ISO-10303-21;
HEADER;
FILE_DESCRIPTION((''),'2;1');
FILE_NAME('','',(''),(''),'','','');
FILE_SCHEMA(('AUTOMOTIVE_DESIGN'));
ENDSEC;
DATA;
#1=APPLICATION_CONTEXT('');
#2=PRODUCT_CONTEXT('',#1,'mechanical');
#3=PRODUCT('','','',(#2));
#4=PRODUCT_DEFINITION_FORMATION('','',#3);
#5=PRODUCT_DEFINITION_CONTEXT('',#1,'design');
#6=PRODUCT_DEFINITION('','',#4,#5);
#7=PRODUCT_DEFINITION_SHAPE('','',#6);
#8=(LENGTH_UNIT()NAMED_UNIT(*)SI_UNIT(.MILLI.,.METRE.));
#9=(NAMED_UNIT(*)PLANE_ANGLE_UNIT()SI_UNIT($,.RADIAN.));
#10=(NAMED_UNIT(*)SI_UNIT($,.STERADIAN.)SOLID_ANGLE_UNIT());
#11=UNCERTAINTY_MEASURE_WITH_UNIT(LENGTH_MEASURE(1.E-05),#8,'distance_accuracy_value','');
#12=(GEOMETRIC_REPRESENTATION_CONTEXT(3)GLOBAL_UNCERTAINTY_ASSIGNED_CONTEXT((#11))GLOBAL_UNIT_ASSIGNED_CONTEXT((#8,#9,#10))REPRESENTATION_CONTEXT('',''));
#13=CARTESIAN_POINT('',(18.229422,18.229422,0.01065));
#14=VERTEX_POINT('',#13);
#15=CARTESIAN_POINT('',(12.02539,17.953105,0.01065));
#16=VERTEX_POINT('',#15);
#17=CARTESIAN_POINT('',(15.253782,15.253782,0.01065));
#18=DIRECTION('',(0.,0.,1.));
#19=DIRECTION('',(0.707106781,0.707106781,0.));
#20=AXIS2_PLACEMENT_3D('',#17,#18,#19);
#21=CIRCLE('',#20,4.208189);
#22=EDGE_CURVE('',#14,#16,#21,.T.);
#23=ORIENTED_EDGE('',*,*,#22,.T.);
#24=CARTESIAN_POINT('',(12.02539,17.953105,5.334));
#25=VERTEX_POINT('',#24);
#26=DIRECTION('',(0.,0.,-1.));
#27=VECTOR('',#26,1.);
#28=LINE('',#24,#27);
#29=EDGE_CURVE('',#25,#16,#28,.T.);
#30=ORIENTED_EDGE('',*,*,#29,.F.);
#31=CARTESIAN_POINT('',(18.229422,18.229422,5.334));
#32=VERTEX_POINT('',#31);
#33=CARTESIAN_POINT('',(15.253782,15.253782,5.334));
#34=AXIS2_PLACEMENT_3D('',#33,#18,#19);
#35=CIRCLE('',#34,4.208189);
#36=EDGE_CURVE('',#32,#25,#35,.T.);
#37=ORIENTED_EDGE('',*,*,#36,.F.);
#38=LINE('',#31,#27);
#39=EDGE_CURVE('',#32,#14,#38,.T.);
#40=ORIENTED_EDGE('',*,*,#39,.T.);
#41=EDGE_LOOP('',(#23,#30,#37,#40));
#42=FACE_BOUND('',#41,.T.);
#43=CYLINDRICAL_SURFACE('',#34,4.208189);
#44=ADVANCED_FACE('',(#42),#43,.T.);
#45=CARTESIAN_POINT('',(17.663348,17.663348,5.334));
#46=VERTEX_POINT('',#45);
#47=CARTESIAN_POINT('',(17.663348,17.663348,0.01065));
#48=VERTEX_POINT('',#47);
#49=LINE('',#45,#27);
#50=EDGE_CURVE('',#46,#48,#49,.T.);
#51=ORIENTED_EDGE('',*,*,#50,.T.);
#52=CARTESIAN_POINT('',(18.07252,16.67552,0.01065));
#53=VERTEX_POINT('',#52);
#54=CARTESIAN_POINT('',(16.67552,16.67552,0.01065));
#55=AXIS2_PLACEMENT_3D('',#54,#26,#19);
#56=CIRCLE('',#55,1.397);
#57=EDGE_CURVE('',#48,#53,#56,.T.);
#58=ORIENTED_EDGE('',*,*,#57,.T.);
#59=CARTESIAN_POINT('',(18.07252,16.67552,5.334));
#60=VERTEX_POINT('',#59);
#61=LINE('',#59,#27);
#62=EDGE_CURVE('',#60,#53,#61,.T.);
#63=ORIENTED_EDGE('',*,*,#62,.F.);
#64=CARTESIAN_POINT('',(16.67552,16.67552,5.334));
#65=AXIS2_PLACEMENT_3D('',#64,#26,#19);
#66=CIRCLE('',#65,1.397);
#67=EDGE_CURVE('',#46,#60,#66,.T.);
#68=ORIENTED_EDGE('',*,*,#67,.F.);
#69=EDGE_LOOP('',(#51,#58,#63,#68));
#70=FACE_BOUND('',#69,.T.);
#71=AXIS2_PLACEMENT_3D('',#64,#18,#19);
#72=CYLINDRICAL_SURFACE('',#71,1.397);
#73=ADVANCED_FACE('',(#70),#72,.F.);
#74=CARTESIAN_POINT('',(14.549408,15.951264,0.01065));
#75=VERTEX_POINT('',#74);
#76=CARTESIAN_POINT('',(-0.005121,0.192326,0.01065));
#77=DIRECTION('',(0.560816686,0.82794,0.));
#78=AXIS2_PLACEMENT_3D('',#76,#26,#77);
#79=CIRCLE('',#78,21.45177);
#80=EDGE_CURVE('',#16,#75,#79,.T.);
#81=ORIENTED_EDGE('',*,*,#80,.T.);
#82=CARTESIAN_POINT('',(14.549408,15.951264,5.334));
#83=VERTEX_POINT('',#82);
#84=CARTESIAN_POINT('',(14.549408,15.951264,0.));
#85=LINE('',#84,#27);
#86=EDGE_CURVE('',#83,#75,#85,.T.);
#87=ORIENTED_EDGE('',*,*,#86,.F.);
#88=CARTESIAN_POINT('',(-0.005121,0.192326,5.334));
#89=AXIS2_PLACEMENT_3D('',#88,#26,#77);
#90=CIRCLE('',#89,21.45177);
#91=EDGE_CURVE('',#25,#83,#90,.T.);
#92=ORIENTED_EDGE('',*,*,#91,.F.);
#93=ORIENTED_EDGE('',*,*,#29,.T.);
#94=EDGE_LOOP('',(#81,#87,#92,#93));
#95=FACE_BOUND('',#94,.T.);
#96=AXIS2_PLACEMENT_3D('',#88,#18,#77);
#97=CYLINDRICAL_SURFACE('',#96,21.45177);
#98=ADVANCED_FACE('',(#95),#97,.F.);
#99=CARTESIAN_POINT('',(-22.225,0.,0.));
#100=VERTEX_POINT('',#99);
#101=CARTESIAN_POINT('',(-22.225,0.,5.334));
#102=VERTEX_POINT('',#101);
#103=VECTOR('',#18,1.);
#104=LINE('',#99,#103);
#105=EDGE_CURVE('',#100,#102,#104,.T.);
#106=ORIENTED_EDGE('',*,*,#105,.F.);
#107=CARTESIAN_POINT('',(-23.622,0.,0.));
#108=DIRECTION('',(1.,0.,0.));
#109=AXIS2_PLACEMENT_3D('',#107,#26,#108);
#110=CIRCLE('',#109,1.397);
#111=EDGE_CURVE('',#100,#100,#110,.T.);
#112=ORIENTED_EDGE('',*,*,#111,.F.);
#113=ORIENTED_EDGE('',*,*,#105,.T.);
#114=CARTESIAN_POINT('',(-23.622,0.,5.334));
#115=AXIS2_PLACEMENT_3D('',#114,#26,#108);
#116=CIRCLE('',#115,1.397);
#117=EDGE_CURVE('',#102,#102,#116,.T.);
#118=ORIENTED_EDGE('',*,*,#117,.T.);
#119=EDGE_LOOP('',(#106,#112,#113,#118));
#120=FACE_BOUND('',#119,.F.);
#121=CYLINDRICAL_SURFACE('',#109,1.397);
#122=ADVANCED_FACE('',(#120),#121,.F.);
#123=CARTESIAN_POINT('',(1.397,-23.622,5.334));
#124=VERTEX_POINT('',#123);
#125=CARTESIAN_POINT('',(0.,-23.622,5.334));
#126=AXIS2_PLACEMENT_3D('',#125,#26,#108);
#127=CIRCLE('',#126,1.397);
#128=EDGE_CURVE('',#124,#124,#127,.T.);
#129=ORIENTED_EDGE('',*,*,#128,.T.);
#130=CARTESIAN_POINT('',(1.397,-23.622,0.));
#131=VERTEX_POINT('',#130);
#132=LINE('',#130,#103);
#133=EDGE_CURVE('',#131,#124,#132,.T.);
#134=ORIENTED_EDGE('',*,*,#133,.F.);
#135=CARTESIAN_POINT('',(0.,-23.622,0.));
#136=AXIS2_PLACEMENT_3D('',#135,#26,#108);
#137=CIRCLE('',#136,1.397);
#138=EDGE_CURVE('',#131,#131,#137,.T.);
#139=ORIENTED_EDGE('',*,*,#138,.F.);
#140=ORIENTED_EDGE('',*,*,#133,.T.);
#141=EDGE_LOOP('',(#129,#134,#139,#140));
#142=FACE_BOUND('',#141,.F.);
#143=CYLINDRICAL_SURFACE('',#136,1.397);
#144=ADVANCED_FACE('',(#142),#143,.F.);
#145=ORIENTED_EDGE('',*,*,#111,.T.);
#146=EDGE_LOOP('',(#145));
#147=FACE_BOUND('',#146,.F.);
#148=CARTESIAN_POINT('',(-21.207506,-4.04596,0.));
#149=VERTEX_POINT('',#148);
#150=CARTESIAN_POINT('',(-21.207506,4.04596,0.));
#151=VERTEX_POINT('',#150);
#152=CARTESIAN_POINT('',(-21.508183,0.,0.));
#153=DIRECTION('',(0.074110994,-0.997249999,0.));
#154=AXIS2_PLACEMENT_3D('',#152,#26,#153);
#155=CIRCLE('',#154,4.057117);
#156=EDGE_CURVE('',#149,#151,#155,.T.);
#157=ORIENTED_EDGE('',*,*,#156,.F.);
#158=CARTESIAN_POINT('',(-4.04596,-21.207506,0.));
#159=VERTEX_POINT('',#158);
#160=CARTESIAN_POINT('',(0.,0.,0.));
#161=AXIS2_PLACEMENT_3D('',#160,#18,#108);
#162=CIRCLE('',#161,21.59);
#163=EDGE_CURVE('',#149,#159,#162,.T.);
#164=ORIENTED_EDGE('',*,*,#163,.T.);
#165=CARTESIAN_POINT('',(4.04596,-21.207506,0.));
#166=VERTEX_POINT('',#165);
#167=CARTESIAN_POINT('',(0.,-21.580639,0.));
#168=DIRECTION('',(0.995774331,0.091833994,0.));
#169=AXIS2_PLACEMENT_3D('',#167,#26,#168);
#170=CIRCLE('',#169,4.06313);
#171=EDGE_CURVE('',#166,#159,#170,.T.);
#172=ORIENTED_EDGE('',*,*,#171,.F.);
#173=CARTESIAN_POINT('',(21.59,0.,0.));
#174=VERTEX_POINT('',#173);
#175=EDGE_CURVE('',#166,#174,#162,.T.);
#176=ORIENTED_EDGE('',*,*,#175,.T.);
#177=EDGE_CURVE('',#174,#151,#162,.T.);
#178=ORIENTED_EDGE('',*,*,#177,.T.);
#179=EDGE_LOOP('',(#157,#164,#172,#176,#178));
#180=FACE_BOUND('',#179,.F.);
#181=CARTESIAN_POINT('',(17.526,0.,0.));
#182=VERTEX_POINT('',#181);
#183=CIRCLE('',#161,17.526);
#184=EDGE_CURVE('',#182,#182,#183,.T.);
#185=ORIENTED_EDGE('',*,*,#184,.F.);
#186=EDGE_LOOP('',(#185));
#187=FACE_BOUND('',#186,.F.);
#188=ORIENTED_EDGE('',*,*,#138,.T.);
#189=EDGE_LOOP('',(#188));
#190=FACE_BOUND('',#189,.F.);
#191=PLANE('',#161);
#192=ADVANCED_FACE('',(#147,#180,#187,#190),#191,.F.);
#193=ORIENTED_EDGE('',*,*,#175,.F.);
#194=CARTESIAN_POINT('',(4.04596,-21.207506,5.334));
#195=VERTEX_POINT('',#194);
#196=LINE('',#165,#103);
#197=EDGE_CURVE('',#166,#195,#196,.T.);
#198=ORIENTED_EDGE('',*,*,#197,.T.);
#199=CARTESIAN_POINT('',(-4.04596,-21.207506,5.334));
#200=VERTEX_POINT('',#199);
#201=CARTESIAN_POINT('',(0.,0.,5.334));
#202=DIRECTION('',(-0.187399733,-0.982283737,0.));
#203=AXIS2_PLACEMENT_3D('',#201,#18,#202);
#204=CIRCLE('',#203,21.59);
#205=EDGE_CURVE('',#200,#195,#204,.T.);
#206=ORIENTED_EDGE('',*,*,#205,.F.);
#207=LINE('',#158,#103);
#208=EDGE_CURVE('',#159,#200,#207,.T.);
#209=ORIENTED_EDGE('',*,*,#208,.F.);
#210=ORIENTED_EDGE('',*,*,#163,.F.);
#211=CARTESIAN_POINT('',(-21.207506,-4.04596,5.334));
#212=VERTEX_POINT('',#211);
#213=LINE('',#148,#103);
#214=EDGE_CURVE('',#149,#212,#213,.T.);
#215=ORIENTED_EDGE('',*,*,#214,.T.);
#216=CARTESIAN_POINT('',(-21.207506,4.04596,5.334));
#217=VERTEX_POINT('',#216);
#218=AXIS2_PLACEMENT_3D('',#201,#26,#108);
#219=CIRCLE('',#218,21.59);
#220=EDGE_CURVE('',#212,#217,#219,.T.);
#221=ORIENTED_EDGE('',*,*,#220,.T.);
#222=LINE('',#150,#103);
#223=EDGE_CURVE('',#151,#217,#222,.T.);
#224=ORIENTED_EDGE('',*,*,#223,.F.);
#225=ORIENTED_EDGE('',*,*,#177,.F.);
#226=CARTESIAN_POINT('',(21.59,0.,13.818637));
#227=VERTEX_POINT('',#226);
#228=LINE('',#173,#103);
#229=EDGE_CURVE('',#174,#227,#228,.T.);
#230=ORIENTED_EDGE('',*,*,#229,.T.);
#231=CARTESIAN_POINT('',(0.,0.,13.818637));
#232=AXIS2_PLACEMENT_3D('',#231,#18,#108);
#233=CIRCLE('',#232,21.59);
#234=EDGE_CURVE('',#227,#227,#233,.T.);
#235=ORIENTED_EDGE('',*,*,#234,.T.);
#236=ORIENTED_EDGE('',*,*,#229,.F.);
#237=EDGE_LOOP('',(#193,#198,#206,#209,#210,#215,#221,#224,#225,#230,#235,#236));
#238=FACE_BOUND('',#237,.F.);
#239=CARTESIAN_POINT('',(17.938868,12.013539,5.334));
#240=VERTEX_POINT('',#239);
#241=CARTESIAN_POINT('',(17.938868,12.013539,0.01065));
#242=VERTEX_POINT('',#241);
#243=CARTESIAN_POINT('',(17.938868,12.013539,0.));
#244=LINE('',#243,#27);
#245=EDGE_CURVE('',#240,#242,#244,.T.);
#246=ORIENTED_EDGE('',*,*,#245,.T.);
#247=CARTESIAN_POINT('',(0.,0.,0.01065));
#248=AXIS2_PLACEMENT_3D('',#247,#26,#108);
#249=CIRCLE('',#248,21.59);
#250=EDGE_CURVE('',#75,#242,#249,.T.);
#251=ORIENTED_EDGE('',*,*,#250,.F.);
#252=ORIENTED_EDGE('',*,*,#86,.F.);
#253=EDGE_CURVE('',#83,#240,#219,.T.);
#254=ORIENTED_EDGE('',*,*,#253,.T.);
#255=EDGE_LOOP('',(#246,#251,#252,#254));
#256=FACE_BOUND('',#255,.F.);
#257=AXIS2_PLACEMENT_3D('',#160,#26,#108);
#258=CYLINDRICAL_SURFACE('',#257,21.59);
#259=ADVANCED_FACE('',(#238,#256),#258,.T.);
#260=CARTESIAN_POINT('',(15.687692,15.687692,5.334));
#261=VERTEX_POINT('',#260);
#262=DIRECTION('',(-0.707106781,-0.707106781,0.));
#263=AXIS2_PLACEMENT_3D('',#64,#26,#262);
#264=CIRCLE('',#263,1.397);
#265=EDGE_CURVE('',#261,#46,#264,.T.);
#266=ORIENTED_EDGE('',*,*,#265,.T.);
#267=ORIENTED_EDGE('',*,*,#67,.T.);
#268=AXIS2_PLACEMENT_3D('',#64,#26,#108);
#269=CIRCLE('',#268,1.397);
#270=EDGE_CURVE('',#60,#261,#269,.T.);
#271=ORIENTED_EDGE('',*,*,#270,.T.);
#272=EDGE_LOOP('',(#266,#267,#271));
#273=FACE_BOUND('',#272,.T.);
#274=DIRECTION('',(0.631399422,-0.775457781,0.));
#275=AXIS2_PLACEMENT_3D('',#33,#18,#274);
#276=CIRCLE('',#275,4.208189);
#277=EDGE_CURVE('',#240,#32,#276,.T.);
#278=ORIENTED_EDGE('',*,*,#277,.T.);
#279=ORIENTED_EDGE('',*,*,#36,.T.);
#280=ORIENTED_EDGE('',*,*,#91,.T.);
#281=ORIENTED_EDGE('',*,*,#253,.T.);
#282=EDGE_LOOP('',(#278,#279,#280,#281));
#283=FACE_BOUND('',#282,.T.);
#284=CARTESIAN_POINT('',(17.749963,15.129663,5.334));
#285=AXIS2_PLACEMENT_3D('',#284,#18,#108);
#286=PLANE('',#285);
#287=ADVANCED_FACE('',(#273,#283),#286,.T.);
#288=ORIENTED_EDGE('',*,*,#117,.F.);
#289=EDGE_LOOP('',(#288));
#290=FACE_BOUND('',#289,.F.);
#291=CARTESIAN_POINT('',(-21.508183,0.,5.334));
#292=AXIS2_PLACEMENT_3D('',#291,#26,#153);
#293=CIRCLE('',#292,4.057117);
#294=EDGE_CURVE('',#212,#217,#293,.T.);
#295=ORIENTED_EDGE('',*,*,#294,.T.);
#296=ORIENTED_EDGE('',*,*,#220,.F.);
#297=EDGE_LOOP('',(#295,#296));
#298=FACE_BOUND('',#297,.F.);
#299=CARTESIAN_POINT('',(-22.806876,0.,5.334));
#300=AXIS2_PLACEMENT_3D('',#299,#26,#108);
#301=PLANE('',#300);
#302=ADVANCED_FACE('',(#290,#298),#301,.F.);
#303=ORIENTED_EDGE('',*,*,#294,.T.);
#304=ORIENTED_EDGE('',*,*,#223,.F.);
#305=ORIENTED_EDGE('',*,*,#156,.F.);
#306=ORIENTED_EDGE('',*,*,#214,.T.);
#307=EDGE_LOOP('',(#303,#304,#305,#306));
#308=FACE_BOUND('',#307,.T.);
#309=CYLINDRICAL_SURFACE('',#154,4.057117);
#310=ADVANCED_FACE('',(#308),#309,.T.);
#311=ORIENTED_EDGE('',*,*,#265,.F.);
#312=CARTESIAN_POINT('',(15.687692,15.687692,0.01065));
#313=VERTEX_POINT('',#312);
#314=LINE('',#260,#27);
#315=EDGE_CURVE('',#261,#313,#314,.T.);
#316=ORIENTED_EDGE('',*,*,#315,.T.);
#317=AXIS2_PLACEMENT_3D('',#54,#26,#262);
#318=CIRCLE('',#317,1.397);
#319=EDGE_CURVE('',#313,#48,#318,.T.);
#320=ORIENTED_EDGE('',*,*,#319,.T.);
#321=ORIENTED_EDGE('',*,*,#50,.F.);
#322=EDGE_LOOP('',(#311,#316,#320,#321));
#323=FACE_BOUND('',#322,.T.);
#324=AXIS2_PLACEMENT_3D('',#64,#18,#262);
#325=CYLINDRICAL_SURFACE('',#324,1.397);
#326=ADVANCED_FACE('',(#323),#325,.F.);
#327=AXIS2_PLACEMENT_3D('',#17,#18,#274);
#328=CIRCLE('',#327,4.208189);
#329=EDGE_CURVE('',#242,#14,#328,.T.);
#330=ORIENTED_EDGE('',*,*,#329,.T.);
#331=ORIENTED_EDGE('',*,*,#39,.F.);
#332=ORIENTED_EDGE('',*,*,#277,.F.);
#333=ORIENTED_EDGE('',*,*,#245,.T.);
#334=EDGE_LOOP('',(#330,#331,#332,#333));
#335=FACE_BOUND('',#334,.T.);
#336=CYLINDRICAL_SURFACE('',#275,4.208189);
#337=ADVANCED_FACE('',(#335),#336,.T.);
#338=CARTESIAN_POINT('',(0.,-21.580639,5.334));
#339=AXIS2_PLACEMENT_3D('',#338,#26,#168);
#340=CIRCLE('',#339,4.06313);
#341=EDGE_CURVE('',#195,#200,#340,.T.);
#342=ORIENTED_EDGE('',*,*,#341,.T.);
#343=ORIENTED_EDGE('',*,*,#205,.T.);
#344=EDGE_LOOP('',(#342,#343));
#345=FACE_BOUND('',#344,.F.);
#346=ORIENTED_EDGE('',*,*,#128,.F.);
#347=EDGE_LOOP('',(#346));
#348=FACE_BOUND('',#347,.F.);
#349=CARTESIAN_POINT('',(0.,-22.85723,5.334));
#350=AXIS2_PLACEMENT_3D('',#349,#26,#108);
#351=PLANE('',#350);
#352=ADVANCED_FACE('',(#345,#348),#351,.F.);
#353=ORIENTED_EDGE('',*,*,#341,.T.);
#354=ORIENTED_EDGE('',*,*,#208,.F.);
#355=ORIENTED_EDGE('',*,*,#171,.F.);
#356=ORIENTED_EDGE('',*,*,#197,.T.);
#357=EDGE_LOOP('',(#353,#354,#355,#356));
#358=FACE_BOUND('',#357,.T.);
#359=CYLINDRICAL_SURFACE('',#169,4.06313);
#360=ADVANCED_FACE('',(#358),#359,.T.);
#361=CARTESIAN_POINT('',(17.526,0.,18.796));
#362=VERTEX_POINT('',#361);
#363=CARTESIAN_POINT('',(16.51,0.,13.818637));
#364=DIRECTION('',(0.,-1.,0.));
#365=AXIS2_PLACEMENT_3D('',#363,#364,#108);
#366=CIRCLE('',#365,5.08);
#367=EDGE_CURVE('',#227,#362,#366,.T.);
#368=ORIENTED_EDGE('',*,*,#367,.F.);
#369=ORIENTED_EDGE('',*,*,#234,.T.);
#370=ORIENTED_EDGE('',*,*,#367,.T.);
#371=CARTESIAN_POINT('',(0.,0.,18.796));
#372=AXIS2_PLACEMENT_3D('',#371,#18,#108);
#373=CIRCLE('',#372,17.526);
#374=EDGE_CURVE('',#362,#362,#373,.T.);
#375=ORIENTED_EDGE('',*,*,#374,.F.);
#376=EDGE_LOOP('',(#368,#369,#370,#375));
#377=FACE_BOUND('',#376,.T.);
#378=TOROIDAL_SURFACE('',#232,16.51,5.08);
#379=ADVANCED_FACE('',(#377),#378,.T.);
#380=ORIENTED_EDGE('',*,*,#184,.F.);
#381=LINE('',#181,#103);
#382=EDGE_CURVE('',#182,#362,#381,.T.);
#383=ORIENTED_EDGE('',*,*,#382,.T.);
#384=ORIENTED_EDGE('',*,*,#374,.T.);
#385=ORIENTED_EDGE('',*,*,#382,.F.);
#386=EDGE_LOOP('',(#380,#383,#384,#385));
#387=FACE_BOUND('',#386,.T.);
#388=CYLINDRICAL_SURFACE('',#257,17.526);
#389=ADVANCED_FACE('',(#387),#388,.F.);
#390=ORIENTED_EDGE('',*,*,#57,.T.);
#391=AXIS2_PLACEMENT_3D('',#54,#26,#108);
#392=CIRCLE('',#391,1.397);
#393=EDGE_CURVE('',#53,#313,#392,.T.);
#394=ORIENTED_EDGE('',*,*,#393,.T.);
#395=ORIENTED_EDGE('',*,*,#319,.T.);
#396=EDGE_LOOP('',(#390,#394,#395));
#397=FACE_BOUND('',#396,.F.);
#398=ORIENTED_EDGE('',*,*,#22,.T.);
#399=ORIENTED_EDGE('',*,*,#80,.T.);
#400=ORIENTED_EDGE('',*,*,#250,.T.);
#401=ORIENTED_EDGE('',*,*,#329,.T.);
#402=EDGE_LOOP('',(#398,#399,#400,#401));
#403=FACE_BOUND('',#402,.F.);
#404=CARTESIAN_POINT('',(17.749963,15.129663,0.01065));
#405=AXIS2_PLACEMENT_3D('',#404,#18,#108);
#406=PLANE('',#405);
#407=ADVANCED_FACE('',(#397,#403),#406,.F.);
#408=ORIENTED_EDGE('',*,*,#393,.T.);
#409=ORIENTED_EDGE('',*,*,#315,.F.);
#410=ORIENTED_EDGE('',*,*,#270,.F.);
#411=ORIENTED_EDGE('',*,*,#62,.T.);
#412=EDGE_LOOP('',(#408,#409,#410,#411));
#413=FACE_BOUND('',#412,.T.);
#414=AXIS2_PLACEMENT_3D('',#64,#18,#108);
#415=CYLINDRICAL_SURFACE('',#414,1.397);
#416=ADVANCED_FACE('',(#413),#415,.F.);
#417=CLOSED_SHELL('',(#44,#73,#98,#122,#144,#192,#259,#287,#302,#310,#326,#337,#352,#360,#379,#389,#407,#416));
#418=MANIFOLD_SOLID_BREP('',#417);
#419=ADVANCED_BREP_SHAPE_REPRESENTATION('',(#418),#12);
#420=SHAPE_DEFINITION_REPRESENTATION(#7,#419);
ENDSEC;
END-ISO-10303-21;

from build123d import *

# Parameters (mm, degrees)
F0_R     = 21.59
F0_R_2   = 17.526
F1_DEPTH = 18.796
F2_R     = 1.397
F3_DEPTH = 5.334
F5_DEPTH = 5.32335


# Not quite as in the source:
# - a fillet or chamfer that OpenCascade refuses, or shapes differently, is made with other operations: its cross-section is extruded or revolved along the edge and cut away or added


with BuildPart() as f1:
    # F0 (on Top) → F1 (new body)
    with BuildSketch(Plane.XY):
        Circle(F0_R)
        Circle(F0_R_2, mode=Mode.SUBTRACT)
    extrude(amount=F1_DEPTH)

    # F2 (on face) → F3 (join)
    with BuildSketch(Plane(origin=(0, 0, 0), x_dir=(1, 0, 0), z_dir=(0, 0, -1))):
        with BuildLine():
            ThreePointArc((-21.2075058824, -4.0459602383), (-21.5081828799, 0), (-21.2075058824, 4.0459602383))
            ThreePointArc((-21.2075058824, 4.0459602383), (-25.5653001948, 0), (-21.2075058824, -4.0459602383))
        make_face()
        with Locations((-23.622, 0)):
            Circle(F2_R, mode=Mode.SUBTRACT)
        with BuildLine():
            ThreePointArc((-4.0459602383, 21.2075058824), (0, 21.59), (4.0459602383, 21.2075058824))
            ThreePointArc((4.0459602383, 21.2075058824), (0, 25.6437689885), (-4.0459602383, 21.2075058824))
        make_face()
        with Locations((0, 23.622)):
            Circle(F2_R, mode=Mode.SUBTRACT)
    extrude(amount=-F3_DEPTH)

    # F4 (on face) → F5 (join)
    with BuildSketch(Plane.XY.offset(5.334)):
        with BuildLine():
            ThreePointArc((15.2619734187, 15.2619734187), (16.6668392005, 13.6913700024), (17.9108306766, 11.990508996))
            ThreePointArc((17.9108306766, 11.990508996), (19.4564957211, 15.0391701429), (18.2294215901, 18.2294215901))
            Line((18.2294215901, 18.2294215901), (17.6633479303, 17.6633479303))
            ThreePointArc((17.6633479303, 17.6633479303), (17.9661794639, 17.210128512), (18.072519757, 16.675519757))
            ThreePointArc((18.072519757, 16.675519757), (17.210128512, 15.3848600501), (15.6876915837, 15.6876915837))
            Line((15.6876915837, 15.6876915837), (15.2619734187, 15.2619734187))
        make_face()
        with BuildLine():
            Line((17.6633479303, 17.6633479303), (18.2294215901, 18.2294215901))
            ThreePointArc((18.2294215901, 18.2294215901), (15.0665422687, 19.4578041419), (12.025389791, 17.9531045364))
            ThreePointArc((12.025389791, 17.9531045364), (13.7098474372, 16.6871156464), (15.2619734187, 15.2619734187))
            Line((15.2619734187, 15.2619734187), (15.6876915837, 15.6876915837))
            ThreePointArc((15.6876915837, 15.6876915837), (15.6876915837, 17.6633479303), (17.6633479303, 17.6633479303))
        make_face()
    extrude(amount=-F5_DEPTH)

    # F6: fillet of radius 5.08 on 1 edges, made by hand

    # F6_s1 → F6_t2 (revolve, cut)
    with BuildSketch(Plane.XZ):
        with BuildLine():
            ThreePointArc((21.59, 13.8186368427), (20.4449510797, 17.0315109454), (17.526, 18.796))
            Line((17.526, 18.796), (21.59, 18.796))
            Line((21.59, 18.796), (21.59, 13.8186368427))
        make_face()
    revolve(axis=Axis((0, 0, 18.796), (0, 0, 1)), mode=Mode.SUBTRACT)


solid = f1.part
